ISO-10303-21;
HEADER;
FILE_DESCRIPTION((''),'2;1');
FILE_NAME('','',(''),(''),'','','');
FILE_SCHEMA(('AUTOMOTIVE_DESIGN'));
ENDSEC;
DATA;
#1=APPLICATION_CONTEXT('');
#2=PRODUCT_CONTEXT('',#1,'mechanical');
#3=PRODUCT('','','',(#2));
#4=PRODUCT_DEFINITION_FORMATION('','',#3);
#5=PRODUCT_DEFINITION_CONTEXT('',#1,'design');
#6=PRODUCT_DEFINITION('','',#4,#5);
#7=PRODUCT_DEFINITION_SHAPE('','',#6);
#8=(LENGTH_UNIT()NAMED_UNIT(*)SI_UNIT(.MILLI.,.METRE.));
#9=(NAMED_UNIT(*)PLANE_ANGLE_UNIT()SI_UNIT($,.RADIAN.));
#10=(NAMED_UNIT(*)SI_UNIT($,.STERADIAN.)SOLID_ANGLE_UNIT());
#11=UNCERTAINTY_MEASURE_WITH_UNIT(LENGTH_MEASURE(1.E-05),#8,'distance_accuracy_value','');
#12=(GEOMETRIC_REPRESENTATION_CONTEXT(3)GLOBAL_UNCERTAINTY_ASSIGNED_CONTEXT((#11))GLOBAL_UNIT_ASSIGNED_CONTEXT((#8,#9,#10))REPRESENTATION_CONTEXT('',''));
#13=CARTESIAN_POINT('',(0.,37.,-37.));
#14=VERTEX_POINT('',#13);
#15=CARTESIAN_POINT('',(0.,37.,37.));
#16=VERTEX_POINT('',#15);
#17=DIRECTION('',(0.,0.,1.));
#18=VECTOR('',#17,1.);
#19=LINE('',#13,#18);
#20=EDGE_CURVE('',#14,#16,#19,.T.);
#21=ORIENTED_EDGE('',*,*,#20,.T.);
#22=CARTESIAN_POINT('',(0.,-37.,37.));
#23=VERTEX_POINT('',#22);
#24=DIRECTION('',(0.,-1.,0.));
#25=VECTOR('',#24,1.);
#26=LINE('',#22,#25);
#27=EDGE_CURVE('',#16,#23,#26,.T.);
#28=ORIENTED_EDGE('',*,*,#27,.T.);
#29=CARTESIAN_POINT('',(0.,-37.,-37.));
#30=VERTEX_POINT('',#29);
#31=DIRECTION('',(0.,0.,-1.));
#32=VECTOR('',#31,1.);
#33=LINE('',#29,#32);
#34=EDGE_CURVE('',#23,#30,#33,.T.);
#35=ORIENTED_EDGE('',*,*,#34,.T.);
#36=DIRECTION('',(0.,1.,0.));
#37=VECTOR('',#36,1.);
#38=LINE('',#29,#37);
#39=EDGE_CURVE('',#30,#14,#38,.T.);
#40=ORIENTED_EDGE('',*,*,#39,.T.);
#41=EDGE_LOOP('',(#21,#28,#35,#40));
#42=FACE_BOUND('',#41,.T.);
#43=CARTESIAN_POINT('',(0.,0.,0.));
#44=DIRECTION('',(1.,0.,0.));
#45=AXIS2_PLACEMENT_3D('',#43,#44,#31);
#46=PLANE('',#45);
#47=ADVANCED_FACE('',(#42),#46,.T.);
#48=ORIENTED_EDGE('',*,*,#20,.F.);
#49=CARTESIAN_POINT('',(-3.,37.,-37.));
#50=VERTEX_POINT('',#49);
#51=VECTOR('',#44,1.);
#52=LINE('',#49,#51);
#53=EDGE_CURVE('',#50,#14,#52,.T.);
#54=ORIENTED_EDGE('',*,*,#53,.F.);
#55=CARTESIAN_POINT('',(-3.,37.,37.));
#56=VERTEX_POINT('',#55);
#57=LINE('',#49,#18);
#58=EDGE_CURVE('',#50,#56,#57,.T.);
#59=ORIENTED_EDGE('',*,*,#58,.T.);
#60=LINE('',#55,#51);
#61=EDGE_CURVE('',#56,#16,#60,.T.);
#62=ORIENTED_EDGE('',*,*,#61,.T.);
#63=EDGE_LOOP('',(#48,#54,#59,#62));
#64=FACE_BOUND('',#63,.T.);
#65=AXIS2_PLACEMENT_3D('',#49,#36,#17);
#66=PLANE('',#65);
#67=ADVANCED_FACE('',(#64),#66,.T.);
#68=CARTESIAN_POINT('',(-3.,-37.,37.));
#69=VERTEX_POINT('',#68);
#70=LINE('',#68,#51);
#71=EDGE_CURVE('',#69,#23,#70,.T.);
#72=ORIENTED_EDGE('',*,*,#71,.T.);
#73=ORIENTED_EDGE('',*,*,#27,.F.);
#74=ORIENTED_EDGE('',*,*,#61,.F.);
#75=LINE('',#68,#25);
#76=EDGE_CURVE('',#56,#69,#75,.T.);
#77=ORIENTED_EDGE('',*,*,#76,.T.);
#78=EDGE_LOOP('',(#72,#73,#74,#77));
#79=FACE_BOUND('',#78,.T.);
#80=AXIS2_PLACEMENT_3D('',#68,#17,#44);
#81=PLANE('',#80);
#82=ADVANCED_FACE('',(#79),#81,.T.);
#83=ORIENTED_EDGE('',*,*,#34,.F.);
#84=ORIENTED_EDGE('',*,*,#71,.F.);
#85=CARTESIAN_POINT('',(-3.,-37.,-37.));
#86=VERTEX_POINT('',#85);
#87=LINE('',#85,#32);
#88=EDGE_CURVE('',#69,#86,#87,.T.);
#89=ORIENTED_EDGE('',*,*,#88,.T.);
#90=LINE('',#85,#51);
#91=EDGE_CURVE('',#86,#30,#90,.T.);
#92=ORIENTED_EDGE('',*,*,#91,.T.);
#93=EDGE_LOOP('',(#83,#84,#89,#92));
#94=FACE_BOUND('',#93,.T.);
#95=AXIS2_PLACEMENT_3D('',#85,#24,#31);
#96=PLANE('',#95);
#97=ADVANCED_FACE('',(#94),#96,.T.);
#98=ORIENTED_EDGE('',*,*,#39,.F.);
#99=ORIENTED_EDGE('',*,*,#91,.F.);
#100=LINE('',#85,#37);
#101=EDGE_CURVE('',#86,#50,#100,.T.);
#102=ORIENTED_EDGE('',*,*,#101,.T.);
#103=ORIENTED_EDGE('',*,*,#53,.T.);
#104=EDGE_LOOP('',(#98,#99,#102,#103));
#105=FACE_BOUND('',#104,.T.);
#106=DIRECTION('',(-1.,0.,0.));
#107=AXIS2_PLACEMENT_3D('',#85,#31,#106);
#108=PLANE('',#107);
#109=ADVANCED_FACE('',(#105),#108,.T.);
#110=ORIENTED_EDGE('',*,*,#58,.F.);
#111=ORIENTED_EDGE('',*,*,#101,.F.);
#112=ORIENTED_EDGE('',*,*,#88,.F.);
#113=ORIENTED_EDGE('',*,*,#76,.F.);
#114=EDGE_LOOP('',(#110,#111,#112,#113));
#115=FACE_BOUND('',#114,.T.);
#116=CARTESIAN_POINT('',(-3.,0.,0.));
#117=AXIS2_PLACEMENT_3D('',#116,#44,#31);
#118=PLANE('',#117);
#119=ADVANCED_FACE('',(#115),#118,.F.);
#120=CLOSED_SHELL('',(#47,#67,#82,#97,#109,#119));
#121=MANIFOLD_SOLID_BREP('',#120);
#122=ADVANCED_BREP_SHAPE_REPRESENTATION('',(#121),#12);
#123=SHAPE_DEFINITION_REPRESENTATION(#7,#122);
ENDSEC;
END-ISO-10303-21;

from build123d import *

# Parameters (mm, degrees)
SKETCH1_W          = 74
SKETCH1_H          = 74
BASE_FLANGE1_DEPTH = 3


# Sheet-metal steps are written as plain solids
with BuildPart() as part:
    # Sketch1 → Base-Flange1 (new body)
    with BuildSketch(Plane(origin=(0, 0, 0), x_dir=(0, 0, -1), z_dir=(1, 0, 0))):
        Rectangle(SKETCH1_W, SKETCH1_H)
    extrude(amount=-BASE_FLANGE1_DEPTH)


solid = part.part
